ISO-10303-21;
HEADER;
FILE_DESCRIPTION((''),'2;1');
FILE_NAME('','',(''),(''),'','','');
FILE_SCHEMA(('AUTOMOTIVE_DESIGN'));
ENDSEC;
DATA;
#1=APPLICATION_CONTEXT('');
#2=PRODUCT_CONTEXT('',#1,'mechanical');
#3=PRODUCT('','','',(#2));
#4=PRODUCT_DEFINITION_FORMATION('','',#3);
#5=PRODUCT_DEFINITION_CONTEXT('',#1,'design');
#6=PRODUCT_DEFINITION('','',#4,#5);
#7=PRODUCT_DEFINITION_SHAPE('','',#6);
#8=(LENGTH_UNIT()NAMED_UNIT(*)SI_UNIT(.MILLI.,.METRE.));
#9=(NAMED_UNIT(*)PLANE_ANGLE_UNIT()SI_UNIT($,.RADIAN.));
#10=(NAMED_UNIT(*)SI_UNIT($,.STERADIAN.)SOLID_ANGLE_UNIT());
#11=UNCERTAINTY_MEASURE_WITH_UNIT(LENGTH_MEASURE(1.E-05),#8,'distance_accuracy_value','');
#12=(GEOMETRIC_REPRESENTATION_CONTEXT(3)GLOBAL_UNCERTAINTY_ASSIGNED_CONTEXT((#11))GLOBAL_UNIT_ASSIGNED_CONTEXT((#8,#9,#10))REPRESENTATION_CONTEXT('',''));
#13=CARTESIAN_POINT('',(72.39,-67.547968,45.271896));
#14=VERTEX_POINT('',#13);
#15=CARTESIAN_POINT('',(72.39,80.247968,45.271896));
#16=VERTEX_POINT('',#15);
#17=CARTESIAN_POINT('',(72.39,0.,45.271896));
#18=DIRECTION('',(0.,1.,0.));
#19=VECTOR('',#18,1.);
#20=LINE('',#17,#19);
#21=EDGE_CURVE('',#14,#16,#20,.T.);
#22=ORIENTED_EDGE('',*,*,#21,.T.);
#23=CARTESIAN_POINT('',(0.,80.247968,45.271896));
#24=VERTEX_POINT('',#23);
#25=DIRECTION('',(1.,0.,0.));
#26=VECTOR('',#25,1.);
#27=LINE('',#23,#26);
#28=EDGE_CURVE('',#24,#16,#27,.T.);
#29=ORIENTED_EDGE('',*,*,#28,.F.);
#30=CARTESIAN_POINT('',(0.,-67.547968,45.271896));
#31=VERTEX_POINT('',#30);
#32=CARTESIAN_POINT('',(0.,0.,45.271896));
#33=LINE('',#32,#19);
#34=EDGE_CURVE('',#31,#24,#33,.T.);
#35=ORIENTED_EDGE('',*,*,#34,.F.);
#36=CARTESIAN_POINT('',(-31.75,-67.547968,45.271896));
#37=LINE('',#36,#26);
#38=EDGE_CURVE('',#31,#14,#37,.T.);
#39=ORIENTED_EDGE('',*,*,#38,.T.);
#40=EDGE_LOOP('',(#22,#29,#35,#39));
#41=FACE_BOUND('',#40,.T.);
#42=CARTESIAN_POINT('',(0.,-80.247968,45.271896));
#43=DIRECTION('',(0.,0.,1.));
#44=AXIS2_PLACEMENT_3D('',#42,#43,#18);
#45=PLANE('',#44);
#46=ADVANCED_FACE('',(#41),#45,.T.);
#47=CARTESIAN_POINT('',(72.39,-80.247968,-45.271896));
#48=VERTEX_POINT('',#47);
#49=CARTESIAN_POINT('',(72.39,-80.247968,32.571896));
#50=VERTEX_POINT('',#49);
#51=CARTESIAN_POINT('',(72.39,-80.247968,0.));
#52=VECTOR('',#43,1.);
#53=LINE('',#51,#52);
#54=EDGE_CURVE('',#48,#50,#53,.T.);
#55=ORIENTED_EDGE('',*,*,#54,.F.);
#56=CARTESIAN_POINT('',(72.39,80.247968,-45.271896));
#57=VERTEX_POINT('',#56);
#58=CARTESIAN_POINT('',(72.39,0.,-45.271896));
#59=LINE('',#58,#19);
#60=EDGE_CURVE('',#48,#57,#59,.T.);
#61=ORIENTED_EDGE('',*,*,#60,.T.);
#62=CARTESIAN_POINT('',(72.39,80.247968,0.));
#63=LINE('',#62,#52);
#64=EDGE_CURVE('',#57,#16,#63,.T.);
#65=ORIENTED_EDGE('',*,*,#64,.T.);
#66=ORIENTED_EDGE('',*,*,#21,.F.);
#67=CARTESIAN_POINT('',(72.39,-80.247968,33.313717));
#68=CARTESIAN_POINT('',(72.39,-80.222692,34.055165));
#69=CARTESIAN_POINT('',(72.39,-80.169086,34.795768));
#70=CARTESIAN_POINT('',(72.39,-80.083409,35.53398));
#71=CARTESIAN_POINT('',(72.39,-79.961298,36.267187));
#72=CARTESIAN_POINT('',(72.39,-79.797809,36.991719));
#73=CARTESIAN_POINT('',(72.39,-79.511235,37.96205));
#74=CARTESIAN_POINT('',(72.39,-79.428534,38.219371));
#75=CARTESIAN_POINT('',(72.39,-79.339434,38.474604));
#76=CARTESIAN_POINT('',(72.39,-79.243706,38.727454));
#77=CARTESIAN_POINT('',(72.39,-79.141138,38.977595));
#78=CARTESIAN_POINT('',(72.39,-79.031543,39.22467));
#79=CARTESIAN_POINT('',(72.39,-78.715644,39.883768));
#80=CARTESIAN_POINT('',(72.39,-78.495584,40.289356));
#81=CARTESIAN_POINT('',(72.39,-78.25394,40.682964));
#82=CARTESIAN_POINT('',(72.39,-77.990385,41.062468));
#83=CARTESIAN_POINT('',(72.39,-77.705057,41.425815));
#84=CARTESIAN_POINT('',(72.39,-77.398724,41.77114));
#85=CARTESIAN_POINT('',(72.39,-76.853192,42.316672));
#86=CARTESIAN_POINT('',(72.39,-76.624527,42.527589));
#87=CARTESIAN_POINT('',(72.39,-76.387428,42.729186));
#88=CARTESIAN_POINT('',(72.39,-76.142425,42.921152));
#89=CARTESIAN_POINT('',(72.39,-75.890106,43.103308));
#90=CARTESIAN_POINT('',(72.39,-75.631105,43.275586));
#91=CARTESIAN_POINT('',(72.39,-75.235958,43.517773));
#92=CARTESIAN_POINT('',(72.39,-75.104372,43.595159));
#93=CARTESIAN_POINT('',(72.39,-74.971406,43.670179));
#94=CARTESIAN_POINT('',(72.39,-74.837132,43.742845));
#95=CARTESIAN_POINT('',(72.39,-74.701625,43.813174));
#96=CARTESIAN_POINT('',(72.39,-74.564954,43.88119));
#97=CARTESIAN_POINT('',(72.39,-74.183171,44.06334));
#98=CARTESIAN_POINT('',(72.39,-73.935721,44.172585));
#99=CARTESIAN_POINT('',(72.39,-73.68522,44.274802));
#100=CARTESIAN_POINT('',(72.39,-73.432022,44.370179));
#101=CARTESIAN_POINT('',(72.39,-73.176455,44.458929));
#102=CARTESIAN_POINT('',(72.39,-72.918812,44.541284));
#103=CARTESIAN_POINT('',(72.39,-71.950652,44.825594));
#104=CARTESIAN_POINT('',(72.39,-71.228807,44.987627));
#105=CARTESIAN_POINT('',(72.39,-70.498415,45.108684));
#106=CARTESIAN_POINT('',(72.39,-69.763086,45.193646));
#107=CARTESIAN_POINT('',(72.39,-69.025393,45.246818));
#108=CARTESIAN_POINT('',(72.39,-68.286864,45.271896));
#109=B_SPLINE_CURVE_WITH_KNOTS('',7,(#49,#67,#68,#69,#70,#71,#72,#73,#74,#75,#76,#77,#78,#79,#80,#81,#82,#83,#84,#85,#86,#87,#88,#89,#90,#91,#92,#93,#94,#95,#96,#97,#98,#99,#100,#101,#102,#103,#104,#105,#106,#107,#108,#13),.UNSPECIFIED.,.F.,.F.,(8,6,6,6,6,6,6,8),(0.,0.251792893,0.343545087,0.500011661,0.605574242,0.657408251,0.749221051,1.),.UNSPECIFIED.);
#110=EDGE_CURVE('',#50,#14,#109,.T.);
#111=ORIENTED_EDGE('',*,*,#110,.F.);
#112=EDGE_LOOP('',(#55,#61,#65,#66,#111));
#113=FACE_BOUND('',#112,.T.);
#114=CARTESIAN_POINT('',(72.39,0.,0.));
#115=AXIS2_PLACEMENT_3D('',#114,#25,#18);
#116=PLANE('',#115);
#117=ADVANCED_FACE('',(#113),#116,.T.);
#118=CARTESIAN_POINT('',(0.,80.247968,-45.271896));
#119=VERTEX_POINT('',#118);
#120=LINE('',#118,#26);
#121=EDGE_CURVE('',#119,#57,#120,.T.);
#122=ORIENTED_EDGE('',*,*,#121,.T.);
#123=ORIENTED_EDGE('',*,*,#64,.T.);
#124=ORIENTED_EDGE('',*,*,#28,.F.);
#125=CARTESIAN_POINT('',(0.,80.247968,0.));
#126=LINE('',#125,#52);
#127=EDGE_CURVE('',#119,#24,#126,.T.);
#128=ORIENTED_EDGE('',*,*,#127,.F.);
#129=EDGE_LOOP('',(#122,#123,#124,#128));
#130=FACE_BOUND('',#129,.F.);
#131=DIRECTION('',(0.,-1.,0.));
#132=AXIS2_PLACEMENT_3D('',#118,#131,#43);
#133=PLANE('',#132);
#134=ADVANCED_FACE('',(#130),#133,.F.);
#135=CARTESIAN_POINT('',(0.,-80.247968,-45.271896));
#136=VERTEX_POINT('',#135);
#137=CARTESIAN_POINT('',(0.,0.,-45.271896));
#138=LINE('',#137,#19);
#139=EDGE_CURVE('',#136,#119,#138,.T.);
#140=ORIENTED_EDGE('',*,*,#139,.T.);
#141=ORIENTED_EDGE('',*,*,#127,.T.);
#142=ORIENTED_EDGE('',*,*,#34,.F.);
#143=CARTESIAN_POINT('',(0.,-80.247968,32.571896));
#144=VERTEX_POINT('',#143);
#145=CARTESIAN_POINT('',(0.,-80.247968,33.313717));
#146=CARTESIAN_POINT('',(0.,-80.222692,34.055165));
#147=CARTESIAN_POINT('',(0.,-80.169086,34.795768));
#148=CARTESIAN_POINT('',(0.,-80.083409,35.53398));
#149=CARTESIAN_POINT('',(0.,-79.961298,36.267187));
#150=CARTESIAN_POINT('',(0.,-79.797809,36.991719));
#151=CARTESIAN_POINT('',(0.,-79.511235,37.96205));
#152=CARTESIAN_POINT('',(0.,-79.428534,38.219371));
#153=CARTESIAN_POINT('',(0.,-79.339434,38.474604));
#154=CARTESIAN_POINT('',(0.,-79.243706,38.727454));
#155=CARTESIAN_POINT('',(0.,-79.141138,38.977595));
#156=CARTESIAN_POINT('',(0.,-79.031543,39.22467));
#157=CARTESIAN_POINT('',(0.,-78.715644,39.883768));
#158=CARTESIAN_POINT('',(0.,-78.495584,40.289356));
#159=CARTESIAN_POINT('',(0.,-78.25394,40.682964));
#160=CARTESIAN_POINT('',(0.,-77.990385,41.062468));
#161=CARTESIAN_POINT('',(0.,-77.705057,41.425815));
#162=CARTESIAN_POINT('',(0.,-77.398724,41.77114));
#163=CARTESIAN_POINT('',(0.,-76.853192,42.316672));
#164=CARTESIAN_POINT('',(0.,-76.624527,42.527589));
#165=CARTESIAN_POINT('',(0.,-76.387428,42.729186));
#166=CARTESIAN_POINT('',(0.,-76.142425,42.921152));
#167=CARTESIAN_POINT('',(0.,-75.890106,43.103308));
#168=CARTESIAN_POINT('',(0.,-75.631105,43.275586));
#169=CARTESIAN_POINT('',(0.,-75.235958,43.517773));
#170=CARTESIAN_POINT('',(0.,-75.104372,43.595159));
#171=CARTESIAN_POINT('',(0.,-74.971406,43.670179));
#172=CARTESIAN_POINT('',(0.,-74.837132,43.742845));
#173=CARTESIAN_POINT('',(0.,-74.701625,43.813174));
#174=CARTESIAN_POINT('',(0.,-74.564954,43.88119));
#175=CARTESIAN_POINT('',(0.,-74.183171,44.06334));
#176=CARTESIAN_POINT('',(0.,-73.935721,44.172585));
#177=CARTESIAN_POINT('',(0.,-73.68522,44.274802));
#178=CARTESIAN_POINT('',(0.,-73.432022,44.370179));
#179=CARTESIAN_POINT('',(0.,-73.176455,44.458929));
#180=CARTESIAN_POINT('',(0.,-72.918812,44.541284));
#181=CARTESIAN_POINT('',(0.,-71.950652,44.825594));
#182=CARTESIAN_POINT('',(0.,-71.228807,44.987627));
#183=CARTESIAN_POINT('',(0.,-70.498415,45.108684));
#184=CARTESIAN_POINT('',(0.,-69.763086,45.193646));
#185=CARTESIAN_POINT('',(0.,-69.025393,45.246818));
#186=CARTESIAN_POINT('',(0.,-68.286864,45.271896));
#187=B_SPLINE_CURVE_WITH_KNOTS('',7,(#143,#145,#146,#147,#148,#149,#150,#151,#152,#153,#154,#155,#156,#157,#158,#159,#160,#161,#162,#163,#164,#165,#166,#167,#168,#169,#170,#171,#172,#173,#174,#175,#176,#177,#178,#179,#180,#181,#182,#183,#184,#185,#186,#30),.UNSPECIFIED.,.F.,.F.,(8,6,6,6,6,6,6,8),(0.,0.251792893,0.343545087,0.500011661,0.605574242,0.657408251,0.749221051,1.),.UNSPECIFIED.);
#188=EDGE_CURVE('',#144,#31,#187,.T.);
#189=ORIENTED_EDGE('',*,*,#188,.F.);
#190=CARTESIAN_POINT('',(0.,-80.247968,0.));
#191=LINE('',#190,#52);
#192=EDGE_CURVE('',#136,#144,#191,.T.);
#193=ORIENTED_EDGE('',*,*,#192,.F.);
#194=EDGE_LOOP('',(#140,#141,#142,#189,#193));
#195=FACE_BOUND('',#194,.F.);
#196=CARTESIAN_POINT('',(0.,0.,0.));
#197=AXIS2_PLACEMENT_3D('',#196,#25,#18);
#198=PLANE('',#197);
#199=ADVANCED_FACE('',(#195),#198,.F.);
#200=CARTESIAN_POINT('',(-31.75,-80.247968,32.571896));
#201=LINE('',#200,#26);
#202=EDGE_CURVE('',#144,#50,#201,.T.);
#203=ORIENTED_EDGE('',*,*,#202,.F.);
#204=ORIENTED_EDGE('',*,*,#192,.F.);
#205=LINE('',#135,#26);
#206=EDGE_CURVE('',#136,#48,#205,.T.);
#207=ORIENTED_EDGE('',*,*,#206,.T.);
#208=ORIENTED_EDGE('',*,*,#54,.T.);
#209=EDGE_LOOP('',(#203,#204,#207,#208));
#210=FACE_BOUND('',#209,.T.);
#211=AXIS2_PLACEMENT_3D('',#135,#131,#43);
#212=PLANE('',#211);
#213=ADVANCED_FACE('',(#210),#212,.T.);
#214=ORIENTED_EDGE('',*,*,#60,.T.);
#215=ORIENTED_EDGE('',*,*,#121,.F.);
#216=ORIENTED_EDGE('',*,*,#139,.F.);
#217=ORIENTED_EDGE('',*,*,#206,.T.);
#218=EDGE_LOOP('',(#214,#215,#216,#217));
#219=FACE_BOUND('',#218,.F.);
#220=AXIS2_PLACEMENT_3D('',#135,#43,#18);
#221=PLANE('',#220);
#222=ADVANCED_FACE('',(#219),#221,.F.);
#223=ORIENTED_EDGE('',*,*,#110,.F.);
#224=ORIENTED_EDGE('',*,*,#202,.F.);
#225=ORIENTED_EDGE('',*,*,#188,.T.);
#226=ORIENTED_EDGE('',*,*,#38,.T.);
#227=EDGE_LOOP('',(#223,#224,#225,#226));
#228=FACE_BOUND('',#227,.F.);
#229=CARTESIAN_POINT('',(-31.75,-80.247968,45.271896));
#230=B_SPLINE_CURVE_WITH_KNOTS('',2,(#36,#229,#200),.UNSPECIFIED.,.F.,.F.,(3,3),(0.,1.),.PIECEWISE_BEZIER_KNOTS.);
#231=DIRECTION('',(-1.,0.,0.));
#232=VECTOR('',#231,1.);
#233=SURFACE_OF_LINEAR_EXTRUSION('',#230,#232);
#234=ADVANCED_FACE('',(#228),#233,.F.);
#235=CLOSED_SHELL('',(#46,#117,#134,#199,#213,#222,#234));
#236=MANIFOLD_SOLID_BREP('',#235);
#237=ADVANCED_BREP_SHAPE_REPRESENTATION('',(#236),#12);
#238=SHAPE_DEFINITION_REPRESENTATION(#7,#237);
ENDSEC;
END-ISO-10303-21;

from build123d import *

# Parameters (mm, degrees)
F0_W        = 160.4959368706
F0_H        = 90.5437916517
F1_DEPTH    = 72.39
F2_T1_DEPTH = 135.89


# Not quite as in the source:
# - a fillet or chamfer that OpenCascade refuses, or shapes differently, is made with other operations: its cross-section is extruded or revolved along the edge and cut away or added


with BuildPart() as f1:
    # F0 (on Right) → F1 (new body)
    with BuildSketch(Plane.YZ):
        Rectangle(F0_W, F0_H)
    extrude(amount=F1_DEPTH)

    # F2: fillet of radius 12.7 on 1 edges, made by hand

    # F2_s2 → F2_t1 (cut)
    with BuildSketch(Plane.YZ.offset(-31.75)):
        with BuildLine():
            add(Edge.make_bspline(
                [(-67.5479684353, 45.2718958259), (-80.2479684353, 45.2718958259), (-80.2479684353, 32.5718958259)],
                knots=[0, 0, 0, 1, 1, 1], degree=2, weights=[1, 1, 1]))
            Line((-80.2479684353, 32.5718958259), (-80.2479684353, 45.2718958259))
            Line((-80.2479684353, 45.2718958259), (-67.5479684353, 45.2718958259))
        make_face()
    extrude(amount=F2_T1_DEPTH, mode=Mode.SUBTRACT)


solid = f1.part
